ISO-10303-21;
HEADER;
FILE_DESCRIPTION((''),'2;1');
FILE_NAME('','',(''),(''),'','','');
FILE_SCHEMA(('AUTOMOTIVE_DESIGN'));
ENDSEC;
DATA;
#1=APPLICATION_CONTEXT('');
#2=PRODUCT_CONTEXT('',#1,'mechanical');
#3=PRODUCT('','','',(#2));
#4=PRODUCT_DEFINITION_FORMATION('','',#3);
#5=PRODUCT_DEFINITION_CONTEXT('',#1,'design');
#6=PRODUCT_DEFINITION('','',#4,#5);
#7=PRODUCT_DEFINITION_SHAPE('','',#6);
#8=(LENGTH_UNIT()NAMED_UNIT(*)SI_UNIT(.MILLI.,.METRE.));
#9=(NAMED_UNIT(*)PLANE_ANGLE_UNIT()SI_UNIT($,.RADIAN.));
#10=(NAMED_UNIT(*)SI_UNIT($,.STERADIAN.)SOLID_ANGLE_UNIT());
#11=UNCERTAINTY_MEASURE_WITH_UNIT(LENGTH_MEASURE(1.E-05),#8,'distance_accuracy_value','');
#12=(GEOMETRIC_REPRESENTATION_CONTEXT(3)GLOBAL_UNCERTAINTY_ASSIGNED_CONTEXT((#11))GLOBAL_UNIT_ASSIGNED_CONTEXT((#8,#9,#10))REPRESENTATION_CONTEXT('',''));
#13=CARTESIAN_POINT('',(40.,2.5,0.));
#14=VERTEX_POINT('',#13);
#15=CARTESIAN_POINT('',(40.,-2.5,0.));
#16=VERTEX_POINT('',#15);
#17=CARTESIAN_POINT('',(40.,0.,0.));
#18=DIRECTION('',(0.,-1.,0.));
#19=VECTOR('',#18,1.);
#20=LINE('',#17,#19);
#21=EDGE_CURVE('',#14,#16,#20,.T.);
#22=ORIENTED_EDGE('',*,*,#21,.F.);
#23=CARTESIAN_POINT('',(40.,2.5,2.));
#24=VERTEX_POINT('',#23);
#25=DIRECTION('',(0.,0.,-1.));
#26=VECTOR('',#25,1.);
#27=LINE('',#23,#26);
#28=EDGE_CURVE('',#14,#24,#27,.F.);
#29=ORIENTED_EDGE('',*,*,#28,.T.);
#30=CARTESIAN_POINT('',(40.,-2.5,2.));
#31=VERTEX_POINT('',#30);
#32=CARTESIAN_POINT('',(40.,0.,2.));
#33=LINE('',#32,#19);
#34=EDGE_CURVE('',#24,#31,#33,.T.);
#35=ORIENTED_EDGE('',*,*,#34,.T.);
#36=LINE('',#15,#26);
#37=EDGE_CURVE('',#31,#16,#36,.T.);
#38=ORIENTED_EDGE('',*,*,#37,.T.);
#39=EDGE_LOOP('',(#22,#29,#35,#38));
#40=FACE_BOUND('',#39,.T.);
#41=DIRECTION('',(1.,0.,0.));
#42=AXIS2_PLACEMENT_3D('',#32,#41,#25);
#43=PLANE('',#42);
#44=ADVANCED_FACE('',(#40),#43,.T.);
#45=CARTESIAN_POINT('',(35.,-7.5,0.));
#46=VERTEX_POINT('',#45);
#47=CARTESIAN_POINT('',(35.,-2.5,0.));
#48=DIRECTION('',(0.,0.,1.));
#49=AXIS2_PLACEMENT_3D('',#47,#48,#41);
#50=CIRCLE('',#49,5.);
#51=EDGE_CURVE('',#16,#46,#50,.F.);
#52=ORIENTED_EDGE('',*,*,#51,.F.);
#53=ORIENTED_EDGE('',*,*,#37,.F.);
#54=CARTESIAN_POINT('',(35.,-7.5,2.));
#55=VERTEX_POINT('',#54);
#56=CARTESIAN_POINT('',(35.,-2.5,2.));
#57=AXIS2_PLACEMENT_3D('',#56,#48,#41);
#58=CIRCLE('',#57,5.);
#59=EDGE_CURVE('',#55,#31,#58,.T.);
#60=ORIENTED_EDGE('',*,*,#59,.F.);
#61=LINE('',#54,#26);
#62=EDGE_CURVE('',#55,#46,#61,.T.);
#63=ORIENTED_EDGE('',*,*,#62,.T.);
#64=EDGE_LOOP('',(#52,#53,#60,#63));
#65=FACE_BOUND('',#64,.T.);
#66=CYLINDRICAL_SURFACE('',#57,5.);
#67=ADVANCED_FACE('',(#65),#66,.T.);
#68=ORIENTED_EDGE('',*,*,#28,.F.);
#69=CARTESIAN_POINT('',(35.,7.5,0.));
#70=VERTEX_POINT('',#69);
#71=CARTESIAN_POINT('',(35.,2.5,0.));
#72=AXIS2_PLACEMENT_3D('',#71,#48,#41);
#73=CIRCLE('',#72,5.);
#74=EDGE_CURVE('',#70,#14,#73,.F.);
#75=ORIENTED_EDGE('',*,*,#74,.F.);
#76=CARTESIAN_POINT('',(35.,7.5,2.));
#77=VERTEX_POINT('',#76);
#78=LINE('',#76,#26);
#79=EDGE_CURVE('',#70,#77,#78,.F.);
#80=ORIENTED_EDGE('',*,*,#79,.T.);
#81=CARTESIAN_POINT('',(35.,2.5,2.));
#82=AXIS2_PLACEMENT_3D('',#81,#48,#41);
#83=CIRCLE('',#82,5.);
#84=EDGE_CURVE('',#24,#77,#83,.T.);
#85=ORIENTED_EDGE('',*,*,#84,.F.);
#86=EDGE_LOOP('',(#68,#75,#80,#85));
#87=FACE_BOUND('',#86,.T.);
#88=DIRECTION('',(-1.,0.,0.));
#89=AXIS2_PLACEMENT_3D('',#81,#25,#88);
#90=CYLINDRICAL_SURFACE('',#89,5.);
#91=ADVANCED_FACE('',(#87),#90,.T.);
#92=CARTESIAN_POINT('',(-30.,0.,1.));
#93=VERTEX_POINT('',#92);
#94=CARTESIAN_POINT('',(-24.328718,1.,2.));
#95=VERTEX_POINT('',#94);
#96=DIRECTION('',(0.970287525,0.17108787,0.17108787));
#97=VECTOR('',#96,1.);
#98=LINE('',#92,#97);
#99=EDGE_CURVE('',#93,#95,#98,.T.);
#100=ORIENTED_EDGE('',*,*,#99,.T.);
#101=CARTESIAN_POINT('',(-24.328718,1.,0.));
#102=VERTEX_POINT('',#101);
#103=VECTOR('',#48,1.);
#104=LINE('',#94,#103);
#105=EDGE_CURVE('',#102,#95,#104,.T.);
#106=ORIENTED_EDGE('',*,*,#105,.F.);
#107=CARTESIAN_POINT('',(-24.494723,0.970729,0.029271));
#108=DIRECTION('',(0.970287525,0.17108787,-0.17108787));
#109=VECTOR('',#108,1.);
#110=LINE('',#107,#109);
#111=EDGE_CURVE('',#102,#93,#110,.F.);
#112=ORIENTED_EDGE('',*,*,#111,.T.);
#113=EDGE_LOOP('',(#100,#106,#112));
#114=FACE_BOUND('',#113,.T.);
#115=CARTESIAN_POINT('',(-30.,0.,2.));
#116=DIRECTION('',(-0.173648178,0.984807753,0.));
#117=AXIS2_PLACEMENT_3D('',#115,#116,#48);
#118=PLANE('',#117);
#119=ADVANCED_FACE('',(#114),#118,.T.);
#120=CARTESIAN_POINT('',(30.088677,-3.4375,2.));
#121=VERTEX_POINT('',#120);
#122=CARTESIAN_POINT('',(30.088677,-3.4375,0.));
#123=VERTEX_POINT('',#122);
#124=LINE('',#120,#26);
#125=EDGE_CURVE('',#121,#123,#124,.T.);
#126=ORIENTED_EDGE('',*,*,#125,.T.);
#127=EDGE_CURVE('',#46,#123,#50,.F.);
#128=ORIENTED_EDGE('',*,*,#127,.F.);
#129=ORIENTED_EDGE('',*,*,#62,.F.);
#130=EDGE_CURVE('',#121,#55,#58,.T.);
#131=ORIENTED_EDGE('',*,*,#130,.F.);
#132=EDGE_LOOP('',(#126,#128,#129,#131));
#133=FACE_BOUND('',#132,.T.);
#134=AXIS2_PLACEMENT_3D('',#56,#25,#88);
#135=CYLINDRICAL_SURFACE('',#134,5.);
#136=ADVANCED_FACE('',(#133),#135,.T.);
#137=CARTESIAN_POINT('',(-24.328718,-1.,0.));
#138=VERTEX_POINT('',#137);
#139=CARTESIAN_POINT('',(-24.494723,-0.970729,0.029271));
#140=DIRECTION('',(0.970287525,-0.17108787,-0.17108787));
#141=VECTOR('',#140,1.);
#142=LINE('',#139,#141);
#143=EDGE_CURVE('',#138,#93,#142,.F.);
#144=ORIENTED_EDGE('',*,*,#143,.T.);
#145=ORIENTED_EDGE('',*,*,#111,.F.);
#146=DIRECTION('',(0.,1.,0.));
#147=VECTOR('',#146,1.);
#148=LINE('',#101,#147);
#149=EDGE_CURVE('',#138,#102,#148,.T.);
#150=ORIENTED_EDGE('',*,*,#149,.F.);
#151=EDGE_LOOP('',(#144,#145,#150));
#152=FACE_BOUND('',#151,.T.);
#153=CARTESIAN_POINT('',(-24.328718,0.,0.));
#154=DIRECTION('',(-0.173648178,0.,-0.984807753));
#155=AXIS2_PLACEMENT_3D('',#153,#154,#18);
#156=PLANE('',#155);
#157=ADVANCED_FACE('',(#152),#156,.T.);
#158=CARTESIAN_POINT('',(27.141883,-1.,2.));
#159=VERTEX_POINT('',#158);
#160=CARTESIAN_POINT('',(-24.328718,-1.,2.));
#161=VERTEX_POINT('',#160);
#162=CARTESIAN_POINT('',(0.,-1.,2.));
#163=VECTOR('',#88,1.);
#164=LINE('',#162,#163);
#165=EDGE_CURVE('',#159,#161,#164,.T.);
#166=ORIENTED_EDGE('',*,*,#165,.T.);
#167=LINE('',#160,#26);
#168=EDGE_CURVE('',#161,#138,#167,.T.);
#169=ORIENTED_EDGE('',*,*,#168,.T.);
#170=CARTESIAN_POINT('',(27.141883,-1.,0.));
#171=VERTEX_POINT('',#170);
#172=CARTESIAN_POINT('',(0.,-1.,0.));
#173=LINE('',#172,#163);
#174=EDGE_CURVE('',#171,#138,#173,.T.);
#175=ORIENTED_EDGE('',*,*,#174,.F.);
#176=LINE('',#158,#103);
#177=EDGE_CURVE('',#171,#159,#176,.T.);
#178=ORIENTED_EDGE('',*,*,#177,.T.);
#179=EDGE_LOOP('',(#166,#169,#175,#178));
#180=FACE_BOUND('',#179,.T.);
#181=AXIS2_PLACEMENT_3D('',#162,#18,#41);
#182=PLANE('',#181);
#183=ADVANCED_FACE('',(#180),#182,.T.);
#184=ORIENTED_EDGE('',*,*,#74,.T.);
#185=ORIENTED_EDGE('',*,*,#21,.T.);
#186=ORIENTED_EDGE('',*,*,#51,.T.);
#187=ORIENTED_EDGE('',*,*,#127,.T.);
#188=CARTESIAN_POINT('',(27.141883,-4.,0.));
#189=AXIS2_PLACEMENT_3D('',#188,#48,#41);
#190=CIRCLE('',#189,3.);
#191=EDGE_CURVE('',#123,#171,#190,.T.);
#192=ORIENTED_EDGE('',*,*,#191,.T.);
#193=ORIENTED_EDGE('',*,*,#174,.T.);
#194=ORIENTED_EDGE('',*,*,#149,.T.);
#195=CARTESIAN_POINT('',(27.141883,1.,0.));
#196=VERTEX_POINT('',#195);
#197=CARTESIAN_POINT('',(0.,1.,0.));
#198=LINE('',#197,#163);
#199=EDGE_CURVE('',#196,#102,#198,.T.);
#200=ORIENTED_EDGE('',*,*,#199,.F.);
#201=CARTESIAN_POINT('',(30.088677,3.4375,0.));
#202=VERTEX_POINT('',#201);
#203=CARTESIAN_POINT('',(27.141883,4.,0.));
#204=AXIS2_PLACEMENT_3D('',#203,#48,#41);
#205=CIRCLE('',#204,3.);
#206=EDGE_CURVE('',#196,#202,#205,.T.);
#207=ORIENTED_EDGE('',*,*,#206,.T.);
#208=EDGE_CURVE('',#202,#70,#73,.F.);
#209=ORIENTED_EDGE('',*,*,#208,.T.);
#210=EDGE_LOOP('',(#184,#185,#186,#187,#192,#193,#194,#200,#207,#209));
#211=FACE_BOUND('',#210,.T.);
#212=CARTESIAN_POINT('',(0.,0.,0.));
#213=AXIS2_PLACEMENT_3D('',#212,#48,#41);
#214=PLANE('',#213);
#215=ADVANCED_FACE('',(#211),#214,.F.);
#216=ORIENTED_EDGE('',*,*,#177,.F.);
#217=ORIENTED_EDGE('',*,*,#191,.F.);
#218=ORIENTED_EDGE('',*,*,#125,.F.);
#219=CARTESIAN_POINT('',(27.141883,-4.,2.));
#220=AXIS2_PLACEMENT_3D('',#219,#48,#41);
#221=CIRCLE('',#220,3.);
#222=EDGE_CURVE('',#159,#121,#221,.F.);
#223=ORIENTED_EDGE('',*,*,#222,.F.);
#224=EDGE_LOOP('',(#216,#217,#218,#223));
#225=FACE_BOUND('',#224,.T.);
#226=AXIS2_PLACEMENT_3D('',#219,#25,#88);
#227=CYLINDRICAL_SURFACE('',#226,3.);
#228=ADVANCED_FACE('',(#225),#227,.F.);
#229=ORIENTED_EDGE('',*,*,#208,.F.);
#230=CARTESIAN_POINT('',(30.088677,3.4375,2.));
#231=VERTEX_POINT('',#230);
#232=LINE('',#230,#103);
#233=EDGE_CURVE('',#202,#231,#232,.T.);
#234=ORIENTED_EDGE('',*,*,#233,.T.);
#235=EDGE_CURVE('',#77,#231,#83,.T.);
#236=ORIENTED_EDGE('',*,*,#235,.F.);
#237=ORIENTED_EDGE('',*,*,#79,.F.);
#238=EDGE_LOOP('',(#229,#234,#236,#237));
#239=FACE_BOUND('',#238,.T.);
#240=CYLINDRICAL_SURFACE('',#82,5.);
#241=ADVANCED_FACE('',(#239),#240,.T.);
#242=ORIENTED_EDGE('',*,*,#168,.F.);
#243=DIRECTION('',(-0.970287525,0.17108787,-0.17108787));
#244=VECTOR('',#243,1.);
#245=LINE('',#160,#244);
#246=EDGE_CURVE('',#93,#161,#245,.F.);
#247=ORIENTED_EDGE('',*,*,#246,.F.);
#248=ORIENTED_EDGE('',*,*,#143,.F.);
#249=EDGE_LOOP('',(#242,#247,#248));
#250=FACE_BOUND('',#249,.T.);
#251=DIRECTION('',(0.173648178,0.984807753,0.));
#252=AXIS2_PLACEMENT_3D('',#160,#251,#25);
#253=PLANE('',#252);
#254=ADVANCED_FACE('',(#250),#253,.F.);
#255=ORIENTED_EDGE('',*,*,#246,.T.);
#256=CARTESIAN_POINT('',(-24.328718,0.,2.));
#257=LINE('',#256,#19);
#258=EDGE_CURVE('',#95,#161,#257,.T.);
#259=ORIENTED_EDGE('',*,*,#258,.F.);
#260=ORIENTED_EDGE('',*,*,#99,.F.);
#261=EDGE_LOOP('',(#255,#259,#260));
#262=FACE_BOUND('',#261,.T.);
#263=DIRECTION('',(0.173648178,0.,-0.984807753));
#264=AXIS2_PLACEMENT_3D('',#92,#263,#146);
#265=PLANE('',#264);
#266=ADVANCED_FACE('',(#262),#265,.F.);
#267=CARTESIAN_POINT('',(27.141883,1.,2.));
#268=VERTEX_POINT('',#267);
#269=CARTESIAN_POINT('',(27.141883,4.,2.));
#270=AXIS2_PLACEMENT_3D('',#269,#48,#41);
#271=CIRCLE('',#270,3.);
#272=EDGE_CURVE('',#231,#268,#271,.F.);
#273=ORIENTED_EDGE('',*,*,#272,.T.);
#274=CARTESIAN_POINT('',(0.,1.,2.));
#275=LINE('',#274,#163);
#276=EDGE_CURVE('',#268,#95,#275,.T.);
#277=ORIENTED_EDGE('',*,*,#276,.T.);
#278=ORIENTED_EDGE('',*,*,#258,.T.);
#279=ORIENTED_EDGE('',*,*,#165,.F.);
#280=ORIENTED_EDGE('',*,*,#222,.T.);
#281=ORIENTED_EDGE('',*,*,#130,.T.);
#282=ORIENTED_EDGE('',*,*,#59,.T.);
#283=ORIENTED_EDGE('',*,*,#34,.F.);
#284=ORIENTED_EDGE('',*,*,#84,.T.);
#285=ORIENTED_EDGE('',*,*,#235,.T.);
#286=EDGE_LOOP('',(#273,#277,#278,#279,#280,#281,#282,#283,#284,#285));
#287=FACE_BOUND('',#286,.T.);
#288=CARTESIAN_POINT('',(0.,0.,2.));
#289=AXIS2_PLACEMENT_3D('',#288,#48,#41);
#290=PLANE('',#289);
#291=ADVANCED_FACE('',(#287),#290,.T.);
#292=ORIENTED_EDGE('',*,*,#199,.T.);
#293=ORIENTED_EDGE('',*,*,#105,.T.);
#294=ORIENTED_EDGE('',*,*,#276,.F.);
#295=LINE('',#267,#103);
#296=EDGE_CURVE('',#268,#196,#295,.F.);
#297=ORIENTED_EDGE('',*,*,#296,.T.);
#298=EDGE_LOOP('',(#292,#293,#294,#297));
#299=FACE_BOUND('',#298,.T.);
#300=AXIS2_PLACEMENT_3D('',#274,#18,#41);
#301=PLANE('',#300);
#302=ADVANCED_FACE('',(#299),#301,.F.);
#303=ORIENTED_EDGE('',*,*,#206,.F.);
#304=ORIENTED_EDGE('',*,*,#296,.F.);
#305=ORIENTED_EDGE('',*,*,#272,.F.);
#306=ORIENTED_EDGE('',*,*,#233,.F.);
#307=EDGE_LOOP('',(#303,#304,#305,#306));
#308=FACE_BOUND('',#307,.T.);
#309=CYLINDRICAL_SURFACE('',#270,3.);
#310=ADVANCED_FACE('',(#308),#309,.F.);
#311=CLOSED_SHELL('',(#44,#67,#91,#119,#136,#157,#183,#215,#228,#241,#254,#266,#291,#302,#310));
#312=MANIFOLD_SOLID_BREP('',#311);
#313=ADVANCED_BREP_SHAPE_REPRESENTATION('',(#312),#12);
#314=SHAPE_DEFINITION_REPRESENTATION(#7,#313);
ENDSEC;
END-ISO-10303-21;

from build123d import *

# Parameters (mm, degrees)
SKETCH1_W           = 60
SKETCH1_H           = 2
BOSS_EXTRUDE1_DEPTH = 2
CHAMFER1_SIZE       = 5.67128182
CHAMFER1_SIZE_2     = 1
FILLET1_R           = 5
FILLET2_R           = 3


# Some blends are built 0.0001 mm under size
with BuildPart() as part:
    # Sketch1 → Boss-Extrude1 (new body)
    with BuildSketch(Plane.XY):
        Rectangle(SKETCH1_W, SKETCH1_H)
        Polygon((30, 1), (30, -1), (30, -7.5), (40, -7.5), (40, 7.5), (30, 7.5), align=None)
    extrude(amount=BOSS_EXTRUDE1_DEPTH)

    # Chamfer1
    # the kernel refuses this chamfer: 5.67128182, 1 mm, written as the material it takes off along each edge
    with BuildSketch(Plane(origin=(-30, -15.737045834, 0), x_dir=(0.9999776716360547, 0, -0.006682531656101592), z_dir=(0, 1, 0)), Plane(origin=(-30, 1, -14.737045834), x_dir=(0.9999776716360547, 0.00668253165610172, 0), z_dir=(0, 0, 1))) as chamfer1_piece_1:
        Polygon((CHAMFER1_SIZE * 0.999977671569, -CHAMFER1_SIZE * 0.00668253165565), (-CHAMFER1_SIZE_2 * 0.00668253165611, -CHAMFER1_SIZE_2 * 0.999977671636), (0, 0), align=None)
    extrude(amount=31.474091667, mode=Mode.SUBTRACT)
    with BuildSketch(Plane(origin=(-30, -1, -14.737045834), x_dir=(-0.21013876076743543, 0.9776715712462578, 0), z_dir=(0, 0, 1))) as chamfer1_piece_2:
        Polygon((CHAMFER1_SIZE_2 * 0.977671571246, -CHAMFER1_SIZE_2 * 0.210138760767), (-CHAMFER1_SIZE * 0.210138760753, -CHAMFER1_SIZE * 0.97767157118), (0, 0), align=None)
    extrude(amount=31.474091667, mode=Mode.SUBTRACT)
    with BuildSketch(Plane(origin=(-30, -15.737045834, 2), x_dir=(0.9999776716360547, 0, 0.006682531656101588), z_dir=(0, 1, 0))) as chamfer1_piece_3:
        Polygon((CHAMFER1_SIZE * 0.999977671569, CHAMFER1_SIZE * 0.00668253165565), (-CHAMFER1_SIZE_2 * 0.00668253165611, CHAMFER1_SIZE_2 * 0.999977671636), (0, 0), align=None)
    extrude(amount=31.474091667, mode=Mode.SUBTRACT)

    # Fillet1
    fillet1_edges = [part.edges().sort_by_distance(p)[0] for p in [
        (40, -7.5, 1),
        (40, 7.5, 1),
        (30, 7.5, 1),
        (30, -7.5, 1),
    ]]
    fillet(fillet1_edges, radius=FILLET1_R - 0.0001)  # a hair under: the kernel refuses the full size

    # Fillet2
    fillet2_edges = [part.edges().sort_by_distance(p)[0] for p in [
        (30, 1, 1),
        (30, -1, 1),
    ]]
    fillet(fillet2_edges, radius=FILLET2_R)


solid = part.part
